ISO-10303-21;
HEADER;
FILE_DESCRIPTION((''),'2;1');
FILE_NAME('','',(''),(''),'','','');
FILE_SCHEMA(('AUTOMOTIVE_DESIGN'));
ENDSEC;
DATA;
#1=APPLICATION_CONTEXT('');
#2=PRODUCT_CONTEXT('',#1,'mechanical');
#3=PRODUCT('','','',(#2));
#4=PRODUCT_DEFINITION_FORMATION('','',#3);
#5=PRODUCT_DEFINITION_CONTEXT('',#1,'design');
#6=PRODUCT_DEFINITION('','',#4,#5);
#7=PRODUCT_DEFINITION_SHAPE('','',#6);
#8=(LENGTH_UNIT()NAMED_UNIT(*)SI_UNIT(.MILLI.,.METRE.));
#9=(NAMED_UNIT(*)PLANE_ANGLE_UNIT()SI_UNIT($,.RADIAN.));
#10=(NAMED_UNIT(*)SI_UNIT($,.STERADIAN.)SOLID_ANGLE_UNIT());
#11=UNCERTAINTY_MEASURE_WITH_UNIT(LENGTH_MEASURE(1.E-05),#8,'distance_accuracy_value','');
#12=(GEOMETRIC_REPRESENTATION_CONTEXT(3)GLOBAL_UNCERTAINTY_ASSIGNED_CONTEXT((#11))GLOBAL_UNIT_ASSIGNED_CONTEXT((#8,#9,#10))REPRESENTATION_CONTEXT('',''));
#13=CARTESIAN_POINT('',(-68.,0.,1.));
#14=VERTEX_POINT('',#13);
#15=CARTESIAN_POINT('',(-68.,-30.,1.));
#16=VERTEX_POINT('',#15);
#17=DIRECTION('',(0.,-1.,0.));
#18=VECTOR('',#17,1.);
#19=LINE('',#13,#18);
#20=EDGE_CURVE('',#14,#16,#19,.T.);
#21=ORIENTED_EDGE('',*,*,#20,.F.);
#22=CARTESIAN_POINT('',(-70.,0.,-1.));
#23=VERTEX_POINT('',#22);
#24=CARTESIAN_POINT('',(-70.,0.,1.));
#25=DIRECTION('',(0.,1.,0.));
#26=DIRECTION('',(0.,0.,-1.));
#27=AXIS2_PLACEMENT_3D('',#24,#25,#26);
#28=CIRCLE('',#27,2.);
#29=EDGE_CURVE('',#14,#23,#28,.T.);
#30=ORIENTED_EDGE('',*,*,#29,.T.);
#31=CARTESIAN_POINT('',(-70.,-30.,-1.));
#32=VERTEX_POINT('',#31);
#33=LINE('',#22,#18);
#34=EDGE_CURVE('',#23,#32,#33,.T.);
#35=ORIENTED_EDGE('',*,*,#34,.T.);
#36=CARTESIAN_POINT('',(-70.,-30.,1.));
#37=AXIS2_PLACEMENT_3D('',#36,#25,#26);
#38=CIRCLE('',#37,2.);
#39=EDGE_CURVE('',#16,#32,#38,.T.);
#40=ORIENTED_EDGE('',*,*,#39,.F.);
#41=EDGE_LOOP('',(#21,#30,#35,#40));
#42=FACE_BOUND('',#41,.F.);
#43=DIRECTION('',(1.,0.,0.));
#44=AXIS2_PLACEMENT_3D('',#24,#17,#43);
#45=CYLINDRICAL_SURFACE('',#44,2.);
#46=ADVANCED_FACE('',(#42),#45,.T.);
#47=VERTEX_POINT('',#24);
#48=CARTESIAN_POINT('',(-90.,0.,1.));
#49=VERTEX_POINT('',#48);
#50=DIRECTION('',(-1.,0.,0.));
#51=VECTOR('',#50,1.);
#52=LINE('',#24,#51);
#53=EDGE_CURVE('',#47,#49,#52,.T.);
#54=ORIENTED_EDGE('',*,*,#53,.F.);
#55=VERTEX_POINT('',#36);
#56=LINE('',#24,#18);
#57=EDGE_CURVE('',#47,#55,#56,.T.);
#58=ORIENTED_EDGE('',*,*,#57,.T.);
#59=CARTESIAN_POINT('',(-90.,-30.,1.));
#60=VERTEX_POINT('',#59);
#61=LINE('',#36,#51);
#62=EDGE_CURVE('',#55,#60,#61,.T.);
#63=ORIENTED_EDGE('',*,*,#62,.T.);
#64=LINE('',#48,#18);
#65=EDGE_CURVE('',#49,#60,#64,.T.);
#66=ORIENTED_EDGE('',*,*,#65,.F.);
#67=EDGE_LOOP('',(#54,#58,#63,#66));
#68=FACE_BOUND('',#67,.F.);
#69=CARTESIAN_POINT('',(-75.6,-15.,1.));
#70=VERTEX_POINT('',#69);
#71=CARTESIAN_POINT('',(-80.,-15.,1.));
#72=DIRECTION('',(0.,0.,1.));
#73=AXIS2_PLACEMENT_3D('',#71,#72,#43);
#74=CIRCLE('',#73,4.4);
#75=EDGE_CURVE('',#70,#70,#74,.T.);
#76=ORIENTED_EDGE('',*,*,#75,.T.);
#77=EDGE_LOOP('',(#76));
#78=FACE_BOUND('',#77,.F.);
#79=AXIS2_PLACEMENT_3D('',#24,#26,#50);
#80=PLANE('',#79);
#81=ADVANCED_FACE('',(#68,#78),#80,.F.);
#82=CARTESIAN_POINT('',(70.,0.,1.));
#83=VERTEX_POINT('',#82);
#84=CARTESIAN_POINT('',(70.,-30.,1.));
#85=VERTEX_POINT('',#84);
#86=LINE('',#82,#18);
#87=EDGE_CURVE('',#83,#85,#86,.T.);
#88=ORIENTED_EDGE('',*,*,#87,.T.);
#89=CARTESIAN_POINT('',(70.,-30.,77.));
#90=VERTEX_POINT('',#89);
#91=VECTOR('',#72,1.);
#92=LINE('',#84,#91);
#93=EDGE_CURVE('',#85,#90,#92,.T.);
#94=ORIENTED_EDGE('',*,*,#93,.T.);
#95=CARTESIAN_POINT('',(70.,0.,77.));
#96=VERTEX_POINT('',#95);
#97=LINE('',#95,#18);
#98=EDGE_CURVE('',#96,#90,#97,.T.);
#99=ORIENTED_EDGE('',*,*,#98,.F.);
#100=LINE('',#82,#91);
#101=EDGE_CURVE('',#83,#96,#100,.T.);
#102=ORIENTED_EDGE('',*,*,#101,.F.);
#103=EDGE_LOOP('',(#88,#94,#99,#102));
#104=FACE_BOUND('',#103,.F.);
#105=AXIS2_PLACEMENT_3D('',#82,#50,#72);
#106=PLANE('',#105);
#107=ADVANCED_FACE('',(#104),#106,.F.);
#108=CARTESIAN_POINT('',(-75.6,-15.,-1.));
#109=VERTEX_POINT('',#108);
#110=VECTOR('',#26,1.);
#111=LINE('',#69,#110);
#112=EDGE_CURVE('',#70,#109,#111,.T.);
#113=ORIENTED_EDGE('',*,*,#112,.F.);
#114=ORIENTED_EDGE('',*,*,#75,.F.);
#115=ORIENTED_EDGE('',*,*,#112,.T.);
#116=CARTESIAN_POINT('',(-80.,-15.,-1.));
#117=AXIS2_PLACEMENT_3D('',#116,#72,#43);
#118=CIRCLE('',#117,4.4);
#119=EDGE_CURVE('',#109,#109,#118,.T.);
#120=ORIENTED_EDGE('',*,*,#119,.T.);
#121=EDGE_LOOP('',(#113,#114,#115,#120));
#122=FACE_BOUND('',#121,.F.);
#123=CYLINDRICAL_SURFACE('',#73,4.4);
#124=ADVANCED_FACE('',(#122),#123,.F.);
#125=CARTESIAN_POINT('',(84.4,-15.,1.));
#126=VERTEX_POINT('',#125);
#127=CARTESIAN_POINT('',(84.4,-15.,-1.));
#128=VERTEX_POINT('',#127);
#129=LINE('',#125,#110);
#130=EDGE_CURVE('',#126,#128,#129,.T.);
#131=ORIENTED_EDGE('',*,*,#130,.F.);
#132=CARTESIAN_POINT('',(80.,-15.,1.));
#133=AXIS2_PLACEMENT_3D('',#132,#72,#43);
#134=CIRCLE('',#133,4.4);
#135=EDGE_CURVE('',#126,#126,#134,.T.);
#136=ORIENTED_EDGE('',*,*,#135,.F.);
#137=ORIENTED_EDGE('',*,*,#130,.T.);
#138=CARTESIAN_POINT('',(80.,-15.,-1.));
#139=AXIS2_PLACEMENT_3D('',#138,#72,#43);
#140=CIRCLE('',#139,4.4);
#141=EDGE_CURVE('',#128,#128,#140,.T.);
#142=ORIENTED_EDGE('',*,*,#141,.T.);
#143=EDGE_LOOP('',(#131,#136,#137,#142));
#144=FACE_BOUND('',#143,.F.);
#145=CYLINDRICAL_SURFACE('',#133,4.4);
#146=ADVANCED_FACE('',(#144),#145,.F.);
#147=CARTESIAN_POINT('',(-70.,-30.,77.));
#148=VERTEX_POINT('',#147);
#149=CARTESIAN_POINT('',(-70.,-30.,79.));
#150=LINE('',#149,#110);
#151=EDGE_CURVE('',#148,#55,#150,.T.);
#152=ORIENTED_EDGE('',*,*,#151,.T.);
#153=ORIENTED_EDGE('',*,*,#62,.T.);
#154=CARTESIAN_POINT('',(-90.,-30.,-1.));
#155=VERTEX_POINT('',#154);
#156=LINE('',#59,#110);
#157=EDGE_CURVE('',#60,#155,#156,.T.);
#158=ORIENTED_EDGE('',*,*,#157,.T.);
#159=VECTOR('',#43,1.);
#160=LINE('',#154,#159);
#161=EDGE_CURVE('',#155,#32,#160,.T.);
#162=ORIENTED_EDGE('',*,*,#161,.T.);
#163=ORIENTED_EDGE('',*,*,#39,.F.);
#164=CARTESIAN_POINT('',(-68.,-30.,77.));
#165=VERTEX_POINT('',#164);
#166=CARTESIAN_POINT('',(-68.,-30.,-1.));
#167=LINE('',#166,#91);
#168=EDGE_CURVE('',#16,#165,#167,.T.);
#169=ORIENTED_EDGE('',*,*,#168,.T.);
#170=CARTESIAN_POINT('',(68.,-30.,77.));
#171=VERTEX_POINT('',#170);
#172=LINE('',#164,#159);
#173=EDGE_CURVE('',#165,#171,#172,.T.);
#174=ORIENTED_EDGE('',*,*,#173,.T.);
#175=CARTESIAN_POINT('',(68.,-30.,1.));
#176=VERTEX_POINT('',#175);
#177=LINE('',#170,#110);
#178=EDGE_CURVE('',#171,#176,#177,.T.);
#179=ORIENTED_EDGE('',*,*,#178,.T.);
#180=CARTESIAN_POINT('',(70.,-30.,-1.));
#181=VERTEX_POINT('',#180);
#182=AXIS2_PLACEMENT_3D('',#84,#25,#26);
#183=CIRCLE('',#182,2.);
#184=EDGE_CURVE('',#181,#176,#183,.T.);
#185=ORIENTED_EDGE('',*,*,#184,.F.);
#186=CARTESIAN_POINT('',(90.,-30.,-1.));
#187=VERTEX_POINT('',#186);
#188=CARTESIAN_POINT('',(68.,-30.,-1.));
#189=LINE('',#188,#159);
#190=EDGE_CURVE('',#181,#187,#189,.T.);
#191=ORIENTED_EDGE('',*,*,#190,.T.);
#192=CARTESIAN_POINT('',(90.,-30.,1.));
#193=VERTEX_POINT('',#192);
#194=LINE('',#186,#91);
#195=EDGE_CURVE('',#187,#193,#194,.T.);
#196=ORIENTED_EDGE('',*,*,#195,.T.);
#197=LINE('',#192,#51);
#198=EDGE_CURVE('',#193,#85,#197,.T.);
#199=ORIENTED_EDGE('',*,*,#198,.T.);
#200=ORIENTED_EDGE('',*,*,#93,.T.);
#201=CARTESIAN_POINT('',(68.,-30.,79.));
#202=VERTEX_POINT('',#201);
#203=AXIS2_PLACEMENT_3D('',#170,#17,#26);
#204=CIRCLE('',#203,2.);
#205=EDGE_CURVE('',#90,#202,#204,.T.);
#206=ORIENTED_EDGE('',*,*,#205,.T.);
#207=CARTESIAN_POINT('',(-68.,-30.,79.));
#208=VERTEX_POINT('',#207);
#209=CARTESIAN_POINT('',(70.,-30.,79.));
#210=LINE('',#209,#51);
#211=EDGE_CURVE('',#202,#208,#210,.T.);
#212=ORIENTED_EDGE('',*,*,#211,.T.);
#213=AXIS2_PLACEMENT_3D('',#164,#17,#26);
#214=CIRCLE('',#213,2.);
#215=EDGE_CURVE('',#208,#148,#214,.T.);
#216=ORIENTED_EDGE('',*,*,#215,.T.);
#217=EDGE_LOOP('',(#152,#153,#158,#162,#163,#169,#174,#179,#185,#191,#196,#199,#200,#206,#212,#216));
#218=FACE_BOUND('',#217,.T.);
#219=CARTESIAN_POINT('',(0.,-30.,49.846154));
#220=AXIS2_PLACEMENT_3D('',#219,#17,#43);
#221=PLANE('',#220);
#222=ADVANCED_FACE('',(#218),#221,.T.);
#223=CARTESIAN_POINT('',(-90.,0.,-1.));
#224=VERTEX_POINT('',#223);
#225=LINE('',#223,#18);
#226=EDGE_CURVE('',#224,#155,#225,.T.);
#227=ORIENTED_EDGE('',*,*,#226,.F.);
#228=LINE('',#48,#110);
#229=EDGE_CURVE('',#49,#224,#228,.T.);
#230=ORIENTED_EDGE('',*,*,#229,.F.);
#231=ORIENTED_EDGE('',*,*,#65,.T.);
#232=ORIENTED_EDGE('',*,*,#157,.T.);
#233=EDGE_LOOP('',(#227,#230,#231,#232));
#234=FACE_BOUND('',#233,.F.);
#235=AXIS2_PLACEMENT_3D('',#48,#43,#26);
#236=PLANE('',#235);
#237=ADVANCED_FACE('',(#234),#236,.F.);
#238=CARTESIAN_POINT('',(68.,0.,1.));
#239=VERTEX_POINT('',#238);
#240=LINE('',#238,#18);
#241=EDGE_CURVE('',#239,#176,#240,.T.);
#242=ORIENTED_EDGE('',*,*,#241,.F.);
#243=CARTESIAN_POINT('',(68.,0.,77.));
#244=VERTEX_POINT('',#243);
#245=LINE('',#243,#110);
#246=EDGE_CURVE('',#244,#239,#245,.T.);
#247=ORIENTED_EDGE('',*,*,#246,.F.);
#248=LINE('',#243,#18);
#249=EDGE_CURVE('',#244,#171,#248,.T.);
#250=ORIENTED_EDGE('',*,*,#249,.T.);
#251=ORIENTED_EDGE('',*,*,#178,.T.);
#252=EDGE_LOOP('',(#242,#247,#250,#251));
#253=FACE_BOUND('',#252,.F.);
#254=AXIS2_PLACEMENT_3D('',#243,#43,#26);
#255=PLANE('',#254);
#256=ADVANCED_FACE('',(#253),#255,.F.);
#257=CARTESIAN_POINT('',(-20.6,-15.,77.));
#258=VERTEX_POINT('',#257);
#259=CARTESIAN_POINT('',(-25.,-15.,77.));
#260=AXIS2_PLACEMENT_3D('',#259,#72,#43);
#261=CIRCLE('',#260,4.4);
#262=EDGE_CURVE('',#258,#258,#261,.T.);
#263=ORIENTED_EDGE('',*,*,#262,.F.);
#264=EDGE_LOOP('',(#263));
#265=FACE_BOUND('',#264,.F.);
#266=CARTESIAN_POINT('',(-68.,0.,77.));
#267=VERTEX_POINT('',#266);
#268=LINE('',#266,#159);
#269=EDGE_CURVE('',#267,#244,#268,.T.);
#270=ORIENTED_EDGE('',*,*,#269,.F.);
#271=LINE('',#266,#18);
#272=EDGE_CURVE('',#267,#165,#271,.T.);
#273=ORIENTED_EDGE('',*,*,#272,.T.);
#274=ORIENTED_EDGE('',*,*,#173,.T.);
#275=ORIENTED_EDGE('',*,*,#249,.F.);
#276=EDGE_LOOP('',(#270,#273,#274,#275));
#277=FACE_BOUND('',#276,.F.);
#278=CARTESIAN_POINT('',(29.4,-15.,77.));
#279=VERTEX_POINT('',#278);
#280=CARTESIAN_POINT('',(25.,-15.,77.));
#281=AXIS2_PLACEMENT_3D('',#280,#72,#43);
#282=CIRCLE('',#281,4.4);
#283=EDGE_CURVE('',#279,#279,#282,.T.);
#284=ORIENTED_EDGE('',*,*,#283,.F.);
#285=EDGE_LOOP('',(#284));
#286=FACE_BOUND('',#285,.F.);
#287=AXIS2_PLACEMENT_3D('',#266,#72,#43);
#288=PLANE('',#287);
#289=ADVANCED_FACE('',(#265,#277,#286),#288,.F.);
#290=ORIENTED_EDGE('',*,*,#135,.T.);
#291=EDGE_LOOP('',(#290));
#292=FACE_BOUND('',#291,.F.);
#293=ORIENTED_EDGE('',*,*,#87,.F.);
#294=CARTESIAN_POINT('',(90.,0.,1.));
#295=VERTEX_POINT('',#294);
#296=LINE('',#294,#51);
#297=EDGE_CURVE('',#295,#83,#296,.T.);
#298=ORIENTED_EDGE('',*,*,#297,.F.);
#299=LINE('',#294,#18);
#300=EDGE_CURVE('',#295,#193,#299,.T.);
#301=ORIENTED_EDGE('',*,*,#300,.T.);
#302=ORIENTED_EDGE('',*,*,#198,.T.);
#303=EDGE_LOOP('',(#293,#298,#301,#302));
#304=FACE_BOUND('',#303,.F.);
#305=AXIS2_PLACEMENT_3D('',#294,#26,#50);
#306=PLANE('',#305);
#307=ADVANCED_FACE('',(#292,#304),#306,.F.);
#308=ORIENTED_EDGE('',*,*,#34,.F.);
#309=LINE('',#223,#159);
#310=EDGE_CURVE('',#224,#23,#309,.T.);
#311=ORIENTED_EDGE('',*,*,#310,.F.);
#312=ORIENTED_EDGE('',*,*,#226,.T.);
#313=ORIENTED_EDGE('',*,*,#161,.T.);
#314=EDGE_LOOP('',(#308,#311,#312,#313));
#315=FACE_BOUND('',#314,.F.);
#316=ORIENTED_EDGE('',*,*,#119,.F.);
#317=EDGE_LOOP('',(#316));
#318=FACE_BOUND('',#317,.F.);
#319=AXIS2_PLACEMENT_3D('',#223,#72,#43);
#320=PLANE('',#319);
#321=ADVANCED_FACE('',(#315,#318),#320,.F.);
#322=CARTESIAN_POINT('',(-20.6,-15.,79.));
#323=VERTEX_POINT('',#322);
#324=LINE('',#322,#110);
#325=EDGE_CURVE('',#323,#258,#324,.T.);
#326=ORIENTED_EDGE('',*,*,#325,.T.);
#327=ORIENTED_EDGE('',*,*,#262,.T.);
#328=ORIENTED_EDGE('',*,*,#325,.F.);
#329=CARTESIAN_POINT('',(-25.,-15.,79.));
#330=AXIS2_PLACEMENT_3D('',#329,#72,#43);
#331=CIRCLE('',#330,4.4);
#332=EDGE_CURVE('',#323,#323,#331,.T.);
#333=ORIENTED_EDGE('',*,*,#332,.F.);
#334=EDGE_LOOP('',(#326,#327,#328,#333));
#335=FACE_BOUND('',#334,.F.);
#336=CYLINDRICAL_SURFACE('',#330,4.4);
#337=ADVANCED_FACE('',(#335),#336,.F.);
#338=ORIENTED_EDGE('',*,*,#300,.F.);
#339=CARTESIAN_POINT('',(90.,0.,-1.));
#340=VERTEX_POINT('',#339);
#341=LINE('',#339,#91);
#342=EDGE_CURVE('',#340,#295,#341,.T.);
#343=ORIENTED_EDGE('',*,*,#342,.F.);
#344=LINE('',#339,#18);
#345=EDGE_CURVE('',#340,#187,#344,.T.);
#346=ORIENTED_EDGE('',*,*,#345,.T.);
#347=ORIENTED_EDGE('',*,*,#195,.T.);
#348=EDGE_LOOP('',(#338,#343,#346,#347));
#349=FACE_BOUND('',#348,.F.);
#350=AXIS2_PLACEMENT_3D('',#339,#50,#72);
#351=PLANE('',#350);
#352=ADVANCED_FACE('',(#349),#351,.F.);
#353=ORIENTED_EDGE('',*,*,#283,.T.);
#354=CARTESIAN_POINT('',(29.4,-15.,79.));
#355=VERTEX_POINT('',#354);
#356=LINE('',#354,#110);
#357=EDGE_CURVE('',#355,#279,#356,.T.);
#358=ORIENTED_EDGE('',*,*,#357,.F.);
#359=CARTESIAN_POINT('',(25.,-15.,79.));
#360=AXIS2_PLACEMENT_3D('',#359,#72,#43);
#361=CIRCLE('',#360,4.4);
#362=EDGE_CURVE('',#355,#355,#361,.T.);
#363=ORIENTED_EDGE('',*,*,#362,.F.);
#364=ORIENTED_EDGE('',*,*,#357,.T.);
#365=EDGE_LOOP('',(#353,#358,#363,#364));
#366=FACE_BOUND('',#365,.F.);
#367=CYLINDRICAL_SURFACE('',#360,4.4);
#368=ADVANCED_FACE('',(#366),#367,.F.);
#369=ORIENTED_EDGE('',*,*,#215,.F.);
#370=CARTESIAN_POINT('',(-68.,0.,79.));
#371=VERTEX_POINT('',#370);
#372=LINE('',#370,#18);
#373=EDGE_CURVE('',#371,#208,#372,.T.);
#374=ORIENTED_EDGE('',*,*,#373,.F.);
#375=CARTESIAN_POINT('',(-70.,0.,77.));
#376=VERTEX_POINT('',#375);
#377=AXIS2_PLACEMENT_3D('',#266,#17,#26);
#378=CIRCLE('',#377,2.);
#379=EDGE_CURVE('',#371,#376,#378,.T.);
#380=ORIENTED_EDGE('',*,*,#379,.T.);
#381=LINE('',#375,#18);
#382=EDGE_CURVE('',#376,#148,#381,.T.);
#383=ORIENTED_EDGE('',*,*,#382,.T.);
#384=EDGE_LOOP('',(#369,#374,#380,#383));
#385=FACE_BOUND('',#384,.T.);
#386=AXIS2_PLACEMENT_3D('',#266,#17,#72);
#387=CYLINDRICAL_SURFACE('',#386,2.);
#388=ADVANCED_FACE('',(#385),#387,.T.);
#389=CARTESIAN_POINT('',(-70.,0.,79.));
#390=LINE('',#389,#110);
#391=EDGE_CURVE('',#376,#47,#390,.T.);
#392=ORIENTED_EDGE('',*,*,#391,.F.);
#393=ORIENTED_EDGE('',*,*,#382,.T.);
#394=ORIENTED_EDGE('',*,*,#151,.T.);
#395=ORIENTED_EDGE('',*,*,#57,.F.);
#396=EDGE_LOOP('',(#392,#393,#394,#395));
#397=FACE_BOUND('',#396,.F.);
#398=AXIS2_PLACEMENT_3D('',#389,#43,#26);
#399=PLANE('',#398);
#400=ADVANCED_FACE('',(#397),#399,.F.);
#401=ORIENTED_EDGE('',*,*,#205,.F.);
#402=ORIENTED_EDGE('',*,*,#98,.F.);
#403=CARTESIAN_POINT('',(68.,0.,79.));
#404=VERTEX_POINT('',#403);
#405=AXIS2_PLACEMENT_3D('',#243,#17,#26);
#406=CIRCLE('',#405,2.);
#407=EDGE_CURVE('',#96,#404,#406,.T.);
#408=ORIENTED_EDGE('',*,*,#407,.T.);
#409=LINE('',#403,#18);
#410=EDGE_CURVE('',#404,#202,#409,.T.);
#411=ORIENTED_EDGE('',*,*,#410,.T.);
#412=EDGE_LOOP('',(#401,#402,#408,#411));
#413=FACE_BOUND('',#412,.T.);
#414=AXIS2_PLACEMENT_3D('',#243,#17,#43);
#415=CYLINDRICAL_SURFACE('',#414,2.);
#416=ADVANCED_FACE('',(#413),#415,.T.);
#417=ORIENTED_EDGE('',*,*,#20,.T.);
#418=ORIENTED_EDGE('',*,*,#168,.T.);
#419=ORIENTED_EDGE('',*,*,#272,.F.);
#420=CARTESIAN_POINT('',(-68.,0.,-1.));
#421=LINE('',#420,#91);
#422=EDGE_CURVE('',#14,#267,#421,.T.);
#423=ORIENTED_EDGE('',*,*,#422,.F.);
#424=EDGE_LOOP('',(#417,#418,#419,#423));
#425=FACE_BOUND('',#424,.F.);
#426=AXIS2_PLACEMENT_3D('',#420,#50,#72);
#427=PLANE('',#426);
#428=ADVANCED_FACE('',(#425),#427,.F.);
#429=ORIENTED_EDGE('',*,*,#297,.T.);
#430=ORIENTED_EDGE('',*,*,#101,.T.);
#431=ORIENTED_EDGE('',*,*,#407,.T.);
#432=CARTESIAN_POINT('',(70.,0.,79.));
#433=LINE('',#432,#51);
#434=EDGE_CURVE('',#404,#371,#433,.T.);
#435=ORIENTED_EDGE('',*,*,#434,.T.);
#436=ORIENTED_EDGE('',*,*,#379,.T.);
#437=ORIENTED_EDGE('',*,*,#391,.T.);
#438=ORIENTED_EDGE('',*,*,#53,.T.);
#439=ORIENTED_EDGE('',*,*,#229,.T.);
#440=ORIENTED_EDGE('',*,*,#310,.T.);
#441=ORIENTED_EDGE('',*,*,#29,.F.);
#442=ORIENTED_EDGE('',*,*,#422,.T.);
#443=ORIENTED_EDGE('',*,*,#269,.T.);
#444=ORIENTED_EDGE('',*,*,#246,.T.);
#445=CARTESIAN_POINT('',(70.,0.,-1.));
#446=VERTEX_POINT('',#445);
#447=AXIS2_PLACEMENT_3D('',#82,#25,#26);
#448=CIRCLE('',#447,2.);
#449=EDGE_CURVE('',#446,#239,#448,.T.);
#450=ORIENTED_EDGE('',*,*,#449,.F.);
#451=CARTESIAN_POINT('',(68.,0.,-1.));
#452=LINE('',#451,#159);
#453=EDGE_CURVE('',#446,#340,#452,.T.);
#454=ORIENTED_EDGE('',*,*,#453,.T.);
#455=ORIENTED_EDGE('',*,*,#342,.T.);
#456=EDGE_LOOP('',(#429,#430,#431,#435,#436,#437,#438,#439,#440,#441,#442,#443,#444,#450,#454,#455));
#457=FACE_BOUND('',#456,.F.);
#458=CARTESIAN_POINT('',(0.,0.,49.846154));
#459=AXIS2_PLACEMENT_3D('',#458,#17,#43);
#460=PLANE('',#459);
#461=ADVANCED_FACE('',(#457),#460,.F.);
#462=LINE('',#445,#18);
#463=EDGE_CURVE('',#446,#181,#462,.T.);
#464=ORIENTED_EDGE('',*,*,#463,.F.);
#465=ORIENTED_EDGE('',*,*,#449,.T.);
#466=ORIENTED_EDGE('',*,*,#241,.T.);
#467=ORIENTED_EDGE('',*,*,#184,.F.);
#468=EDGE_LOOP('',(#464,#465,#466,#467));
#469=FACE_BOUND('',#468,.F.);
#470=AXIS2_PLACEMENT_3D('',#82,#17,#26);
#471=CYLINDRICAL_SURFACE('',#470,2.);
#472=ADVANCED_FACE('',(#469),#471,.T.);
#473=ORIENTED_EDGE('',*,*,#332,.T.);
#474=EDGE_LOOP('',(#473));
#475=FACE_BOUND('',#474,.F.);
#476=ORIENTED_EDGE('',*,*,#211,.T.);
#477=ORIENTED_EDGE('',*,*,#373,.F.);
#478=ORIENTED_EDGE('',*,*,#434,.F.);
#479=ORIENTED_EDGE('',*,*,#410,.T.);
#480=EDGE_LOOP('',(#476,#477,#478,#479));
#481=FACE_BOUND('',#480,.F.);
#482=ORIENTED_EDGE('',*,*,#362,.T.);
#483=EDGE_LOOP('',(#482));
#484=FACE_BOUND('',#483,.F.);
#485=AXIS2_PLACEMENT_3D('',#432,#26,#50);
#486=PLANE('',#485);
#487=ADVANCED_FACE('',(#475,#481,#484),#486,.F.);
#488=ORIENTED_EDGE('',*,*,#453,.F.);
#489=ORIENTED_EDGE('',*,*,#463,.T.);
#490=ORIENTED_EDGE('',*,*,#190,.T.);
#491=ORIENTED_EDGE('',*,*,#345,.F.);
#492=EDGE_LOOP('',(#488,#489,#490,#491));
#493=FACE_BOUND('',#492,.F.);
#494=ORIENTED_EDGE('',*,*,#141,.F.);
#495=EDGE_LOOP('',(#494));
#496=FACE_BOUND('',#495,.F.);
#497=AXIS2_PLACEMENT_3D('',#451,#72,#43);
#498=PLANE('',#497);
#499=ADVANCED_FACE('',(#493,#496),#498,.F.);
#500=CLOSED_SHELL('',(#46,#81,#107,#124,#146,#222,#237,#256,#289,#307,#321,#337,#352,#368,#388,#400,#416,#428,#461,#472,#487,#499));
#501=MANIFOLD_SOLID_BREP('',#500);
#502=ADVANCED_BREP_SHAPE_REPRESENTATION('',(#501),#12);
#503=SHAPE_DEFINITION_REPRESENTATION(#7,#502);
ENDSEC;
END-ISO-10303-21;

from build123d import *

# Parameters (mm, degrees)
F1_DEPTH = 30
F2_R     = 4.4
F3_R     = 4.4
F4_DEPTH = 25
F5_R     = 2
F6_R     = 2


# Not quite as in the source:
# - a feature names something its author has since deleted; it is built from what else it names


with BuildPart() as f1:
    # F0 (on Front) → F1 (new body)
    with BuildSketch(Plane.XZ):
        Polygon((90, -1), (90, 1), (70, 1), (70, 79), (-70, 79), (-70, 1), (-90, 1), (-90, -1), (-68, -1), (-68, 77), (68, 77), (68, -1), align=None)
    extrude(amount=F1_DEPTH)

    # F2 (on face) + F3 (on face) → F4 (cut)
    with BuildSketch(Plane.XY.offset(1)):
        with Locations((-80, -15)):
            Circle(F2_R)
        with Locations((80, -15)):
            Circle(F2_R)
    with BuildSketch(Plane.XY.offset(79)):
        with Locations((-25, -15)):
            Circle(F3_R)
        with Locations((25, -15)):
            Circle(F3_R)
    extrude(amount=-F4_DEPTH, mode=Mode.SUBTRACT)

    # F5
    f5_edges = [f1.edges().sort_by_distance(p)[0] for p in [
        (-70, -15, 79),
        (70, -15, 79),
    ]]
    fillet(f5_edges, radius=F5_R)

    # F6
    f6_edges = [f1.edges().sort_by_distance(p)[0] for p in [
        (68, -15, -1),
        (-68, -15, -1),
    ]]
    fillet(f6_edges, radius=F6_R)


solid = f1.part
